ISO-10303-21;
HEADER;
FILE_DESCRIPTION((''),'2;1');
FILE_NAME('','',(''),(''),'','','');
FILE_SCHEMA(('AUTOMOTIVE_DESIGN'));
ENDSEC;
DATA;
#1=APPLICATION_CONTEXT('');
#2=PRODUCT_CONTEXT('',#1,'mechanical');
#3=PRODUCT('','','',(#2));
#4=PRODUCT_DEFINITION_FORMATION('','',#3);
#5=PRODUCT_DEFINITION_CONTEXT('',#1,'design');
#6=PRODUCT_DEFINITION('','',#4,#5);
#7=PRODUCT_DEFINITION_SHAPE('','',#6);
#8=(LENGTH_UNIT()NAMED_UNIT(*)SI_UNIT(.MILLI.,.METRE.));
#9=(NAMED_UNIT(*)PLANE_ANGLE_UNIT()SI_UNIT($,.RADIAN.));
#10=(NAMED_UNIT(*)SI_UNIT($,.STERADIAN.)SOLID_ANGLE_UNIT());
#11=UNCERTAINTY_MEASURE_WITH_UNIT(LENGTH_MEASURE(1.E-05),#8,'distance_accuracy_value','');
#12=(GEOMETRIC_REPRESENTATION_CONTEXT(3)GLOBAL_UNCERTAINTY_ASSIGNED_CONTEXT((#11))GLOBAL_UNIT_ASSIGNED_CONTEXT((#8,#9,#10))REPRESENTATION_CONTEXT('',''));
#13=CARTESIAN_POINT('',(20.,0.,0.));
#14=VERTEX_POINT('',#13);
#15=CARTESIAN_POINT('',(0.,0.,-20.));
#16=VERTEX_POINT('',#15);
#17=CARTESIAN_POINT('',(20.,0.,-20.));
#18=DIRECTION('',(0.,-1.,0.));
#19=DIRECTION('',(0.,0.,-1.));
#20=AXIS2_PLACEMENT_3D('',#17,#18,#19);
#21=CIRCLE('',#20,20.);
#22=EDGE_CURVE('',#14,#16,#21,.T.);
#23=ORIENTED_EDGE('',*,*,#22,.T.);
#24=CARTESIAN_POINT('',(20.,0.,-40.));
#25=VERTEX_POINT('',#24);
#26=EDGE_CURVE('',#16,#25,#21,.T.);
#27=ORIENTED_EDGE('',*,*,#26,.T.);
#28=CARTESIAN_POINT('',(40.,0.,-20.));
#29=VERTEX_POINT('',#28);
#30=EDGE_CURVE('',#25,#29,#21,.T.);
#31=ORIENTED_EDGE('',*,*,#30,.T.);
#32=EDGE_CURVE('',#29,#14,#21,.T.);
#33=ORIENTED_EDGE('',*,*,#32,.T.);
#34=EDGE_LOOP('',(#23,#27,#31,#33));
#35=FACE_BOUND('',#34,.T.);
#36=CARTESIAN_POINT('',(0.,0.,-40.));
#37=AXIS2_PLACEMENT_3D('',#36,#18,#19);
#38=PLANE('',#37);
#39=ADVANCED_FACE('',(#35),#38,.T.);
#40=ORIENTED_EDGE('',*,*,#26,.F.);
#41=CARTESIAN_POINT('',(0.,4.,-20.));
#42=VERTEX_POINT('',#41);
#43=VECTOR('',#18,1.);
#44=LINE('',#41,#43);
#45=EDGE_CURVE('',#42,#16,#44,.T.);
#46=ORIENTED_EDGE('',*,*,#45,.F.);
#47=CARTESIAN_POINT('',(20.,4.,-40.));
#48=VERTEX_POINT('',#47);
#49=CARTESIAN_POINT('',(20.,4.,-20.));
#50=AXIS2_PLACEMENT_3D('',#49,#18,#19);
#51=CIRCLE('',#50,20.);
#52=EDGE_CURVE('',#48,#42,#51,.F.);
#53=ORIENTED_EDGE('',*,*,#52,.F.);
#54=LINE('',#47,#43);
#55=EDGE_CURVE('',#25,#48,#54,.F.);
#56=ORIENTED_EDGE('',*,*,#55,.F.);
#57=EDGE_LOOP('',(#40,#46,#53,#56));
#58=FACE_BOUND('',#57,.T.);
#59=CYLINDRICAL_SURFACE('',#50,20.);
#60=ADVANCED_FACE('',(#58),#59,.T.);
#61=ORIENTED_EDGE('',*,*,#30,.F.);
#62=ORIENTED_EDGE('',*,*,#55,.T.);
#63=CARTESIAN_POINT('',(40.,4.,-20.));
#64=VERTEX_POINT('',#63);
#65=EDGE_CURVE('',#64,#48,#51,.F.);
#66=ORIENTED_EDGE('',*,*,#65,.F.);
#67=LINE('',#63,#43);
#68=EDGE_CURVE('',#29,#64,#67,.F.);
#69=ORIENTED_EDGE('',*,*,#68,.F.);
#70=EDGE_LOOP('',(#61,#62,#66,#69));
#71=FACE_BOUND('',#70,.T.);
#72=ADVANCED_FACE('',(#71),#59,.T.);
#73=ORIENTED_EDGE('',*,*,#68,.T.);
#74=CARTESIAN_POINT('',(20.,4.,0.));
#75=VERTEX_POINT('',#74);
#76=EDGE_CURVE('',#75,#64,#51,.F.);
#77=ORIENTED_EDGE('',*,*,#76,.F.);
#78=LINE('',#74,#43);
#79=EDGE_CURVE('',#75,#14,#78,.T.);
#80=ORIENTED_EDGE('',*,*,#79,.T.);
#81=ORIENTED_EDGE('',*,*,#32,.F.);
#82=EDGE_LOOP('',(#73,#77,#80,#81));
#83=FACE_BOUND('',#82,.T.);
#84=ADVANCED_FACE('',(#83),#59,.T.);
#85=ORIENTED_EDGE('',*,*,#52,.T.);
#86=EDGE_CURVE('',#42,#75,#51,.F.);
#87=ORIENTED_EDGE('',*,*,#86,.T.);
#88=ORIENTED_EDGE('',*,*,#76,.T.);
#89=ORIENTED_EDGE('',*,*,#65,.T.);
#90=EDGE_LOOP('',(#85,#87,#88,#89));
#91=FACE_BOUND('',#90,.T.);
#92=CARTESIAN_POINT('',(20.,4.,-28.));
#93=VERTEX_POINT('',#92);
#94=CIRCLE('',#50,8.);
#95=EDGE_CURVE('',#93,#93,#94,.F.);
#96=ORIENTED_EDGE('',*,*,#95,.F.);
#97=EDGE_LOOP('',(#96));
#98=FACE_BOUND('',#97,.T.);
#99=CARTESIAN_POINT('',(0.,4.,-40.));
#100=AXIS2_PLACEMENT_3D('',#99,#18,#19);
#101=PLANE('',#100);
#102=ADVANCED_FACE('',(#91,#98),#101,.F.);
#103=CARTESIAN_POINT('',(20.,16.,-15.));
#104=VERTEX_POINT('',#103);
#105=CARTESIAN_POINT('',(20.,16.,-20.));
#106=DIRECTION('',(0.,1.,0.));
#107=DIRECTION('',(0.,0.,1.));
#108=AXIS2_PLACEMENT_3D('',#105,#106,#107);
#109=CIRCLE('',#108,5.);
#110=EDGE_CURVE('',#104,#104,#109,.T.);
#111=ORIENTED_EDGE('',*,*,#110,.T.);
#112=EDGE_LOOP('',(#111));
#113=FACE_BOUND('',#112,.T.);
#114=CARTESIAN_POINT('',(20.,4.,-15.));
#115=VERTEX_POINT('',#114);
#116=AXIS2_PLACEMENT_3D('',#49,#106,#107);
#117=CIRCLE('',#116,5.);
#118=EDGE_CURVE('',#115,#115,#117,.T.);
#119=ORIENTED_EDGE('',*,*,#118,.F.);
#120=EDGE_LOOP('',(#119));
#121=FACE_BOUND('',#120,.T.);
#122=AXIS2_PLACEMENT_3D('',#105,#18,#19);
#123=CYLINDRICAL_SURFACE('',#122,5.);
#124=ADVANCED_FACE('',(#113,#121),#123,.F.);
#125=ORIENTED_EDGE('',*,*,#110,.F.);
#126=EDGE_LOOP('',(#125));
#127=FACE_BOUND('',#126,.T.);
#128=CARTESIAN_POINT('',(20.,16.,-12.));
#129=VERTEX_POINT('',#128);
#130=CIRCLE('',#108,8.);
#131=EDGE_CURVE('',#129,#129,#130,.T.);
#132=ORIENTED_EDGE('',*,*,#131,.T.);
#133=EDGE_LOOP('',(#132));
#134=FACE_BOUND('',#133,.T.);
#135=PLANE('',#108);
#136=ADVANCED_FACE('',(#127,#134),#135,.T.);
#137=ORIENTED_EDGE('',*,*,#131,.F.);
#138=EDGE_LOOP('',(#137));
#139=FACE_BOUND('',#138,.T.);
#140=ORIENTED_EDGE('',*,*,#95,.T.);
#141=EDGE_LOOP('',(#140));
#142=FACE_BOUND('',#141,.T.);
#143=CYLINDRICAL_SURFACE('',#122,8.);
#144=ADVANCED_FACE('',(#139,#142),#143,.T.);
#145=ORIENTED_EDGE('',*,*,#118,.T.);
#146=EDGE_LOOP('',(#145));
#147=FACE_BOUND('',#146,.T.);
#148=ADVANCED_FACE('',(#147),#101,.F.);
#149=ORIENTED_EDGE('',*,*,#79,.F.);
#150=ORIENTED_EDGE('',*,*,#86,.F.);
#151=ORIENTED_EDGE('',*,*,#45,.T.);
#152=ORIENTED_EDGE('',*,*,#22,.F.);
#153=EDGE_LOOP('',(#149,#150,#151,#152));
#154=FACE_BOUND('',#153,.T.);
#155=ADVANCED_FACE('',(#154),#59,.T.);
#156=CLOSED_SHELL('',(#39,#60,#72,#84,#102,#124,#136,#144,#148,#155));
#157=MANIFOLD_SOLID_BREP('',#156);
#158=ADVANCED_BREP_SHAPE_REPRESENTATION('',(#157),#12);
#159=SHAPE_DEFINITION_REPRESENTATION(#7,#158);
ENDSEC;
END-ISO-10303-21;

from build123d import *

# Parameters (mm, degrees)
SKETCH_1_W      = 40
SKETCH_1_H      = 40
EXTRUDE_1_DEPTH = 4
SKETCH_2_R      = 8
SKETCH_2_R_2    = 5
EXTRUDE_2_DEPTH = 12
FILLET_1_R      = 20


with BuildPart() as part:
    # Эскиз1 → Вытянуть1 (new body)
    with BuildSketch(Plane(origin=(0, 0, 0), x_dir=(1, 0, 0), z_dir=(0, 1, 0))):
        with Locations((20, 20)):
            Rectangle(SKETCH_1_W, SKETCH_1_H)
    extrude(amount=EXTRUDE_1_DEPTH)

    # Эскиз2 → Вытянуть2 (add)
    with BuildSketch(Plane(origin=(0, 4, 0), x_dir=(1, 0, 0), z_dir=(0, 1, 0))):
        with Locations(Location((20, 20, 0), (0, 0, 90))):
            Circle(SKETCH_2_R)
        with Locations(Location((20, 20, 0), (0, 0, 270))):
            Circle(SKETCH_2_R_2, mode=Mode.SUBTRACT)
    extrude(amount=EXTRUDE_2_DEPTH)

    # Скругление1
    fillet_1_edges = [part.edges().sort_by_distance(p)[0] for p in [
        (40, 2, 0),
        (0, 2, 0),
        (0, 2, -40),
        (40, 2, -40),
    ]]
    fillet(fillet_1_edges, radius=FILLET_1_R - 0.0001)  # a hair under: the kernel refuses the full size


solid = part.part
